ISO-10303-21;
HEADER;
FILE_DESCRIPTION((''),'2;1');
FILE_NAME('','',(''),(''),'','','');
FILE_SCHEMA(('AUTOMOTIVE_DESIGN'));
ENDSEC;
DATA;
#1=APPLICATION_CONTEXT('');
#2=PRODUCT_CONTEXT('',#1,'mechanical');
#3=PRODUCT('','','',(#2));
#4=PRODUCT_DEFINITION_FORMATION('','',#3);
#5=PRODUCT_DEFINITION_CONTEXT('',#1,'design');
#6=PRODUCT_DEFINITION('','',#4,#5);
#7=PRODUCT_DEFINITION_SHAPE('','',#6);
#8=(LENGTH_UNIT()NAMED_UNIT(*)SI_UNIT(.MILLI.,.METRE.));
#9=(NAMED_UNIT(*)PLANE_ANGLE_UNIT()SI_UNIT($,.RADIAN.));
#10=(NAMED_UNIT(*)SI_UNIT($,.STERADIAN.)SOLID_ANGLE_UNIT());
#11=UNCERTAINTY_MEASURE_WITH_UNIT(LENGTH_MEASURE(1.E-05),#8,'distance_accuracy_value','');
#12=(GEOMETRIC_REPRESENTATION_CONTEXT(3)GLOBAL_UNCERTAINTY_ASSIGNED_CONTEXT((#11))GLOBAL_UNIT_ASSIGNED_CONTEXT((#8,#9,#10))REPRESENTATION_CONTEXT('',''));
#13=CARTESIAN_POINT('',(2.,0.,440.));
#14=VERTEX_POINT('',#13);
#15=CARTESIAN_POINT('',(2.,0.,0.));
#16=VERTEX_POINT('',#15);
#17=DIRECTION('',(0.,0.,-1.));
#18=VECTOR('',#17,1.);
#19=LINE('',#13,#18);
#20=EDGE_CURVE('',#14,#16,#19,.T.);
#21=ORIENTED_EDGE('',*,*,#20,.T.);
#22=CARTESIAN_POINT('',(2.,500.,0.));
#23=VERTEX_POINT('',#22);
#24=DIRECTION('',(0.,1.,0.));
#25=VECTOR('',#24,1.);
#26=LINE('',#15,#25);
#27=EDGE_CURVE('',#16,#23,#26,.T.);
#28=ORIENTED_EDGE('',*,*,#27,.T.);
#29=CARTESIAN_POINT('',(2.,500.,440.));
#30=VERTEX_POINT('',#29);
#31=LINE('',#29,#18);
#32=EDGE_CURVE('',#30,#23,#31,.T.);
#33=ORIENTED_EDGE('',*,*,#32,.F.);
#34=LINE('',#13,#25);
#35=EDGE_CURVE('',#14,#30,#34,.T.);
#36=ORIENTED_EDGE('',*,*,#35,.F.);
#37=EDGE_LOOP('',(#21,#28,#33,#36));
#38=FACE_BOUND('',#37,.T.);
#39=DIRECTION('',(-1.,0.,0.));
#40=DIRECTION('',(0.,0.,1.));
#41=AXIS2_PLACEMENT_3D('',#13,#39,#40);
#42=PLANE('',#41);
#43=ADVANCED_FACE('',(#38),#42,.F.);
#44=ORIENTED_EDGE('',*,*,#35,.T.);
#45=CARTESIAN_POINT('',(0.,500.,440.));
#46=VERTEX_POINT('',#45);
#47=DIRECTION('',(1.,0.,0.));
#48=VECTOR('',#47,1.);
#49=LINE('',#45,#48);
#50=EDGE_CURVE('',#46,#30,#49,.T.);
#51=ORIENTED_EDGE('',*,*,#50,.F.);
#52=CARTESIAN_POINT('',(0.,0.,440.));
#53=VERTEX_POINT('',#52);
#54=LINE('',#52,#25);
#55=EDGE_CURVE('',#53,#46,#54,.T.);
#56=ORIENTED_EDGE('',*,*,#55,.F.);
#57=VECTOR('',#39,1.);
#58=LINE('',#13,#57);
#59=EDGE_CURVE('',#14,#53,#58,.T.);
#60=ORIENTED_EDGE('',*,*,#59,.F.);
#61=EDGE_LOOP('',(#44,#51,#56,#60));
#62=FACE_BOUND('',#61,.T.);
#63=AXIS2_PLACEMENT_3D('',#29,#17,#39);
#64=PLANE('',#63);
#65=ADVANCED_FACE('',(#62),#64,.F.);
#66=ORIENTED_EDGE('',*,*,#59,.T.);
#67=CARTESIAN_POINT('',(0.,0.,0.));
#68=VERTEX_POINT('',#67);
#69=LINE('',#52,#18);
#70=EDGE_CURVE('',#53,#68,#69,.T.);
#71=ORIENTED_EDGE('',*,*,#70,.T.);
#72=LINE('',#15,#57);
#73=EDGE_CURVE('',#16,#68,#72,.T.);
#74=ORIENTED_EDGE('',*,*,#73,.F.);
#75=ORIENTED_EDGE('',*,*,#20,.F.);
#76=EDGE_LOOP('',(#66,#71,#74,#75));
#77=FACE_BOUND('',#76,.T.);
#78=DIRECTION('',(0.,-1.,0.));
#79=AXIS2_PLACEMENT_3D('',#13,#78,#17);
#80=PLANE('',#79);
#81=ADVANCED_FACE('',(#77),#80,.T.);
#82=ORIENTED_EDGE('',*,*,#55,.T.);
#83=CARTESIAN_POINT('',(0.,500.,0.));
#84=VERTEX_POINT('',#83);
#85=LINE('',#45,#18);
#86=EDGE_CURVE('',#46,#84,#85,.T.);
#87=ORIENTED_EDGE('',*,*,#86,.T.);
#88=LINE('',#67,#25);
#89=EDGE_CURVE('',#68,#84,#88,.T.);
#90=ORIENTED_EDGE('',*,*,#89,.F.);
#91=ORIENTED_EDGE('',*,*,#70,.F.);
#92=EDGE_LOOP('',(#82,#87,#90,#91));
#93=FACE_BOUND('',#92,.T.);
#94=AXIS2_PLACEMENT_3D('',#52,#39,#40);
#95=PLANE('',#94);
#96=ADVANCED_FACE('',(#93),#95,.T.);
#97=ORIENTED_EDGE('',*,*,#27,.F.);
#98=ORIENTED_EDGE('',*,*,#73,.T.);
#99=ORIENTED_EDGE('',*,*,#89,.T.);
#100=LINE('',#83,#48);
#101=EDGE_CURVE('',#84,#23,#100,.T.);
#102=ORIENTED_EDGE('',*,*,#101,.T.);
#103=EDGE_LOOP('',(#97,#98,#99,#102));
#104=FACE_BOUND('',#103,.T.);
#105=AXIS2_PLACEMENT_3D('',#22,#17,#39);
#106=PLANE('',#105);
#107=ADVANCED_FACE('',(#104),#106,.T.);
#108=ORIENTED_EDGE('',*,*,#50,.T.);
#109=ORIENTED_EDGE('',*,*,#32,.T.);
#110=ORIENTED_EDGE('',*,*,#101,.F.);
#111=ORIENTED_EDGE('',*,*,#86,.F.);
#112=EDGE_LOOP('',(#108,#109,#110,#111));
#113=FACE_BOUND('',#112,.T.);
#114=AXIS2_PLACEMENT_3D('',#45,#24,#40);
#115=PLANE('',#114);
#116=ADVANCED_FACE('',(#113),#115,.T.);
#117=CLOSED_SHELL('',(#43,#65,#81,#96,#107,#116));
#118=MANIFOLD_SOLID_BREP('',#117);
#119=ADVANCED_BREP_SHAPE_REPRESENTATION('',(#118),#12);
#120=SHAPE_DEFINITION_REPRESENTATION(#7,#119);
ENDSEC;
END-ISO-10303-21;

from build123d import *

# Parameters (mm, degrees)
SKETCH_1_W             = 2
SKETCH_1_H             = 500
SM_BASE_FLANGE_1_DEPTH = 440


# Sheet-metal steps are written as plain solids
with BuildPart() as part:
    # Sketch 1 → Базовая кромка1 (new body)
    with BuildSketch(Plane.XY):
        with Locations((1, 250)):
            Rectangle(SKETCH_1_W, SKETCH_1_H)
    extrude(amount=SM_BASE_FLANGE_1_DEPTH)


solid = part.part
